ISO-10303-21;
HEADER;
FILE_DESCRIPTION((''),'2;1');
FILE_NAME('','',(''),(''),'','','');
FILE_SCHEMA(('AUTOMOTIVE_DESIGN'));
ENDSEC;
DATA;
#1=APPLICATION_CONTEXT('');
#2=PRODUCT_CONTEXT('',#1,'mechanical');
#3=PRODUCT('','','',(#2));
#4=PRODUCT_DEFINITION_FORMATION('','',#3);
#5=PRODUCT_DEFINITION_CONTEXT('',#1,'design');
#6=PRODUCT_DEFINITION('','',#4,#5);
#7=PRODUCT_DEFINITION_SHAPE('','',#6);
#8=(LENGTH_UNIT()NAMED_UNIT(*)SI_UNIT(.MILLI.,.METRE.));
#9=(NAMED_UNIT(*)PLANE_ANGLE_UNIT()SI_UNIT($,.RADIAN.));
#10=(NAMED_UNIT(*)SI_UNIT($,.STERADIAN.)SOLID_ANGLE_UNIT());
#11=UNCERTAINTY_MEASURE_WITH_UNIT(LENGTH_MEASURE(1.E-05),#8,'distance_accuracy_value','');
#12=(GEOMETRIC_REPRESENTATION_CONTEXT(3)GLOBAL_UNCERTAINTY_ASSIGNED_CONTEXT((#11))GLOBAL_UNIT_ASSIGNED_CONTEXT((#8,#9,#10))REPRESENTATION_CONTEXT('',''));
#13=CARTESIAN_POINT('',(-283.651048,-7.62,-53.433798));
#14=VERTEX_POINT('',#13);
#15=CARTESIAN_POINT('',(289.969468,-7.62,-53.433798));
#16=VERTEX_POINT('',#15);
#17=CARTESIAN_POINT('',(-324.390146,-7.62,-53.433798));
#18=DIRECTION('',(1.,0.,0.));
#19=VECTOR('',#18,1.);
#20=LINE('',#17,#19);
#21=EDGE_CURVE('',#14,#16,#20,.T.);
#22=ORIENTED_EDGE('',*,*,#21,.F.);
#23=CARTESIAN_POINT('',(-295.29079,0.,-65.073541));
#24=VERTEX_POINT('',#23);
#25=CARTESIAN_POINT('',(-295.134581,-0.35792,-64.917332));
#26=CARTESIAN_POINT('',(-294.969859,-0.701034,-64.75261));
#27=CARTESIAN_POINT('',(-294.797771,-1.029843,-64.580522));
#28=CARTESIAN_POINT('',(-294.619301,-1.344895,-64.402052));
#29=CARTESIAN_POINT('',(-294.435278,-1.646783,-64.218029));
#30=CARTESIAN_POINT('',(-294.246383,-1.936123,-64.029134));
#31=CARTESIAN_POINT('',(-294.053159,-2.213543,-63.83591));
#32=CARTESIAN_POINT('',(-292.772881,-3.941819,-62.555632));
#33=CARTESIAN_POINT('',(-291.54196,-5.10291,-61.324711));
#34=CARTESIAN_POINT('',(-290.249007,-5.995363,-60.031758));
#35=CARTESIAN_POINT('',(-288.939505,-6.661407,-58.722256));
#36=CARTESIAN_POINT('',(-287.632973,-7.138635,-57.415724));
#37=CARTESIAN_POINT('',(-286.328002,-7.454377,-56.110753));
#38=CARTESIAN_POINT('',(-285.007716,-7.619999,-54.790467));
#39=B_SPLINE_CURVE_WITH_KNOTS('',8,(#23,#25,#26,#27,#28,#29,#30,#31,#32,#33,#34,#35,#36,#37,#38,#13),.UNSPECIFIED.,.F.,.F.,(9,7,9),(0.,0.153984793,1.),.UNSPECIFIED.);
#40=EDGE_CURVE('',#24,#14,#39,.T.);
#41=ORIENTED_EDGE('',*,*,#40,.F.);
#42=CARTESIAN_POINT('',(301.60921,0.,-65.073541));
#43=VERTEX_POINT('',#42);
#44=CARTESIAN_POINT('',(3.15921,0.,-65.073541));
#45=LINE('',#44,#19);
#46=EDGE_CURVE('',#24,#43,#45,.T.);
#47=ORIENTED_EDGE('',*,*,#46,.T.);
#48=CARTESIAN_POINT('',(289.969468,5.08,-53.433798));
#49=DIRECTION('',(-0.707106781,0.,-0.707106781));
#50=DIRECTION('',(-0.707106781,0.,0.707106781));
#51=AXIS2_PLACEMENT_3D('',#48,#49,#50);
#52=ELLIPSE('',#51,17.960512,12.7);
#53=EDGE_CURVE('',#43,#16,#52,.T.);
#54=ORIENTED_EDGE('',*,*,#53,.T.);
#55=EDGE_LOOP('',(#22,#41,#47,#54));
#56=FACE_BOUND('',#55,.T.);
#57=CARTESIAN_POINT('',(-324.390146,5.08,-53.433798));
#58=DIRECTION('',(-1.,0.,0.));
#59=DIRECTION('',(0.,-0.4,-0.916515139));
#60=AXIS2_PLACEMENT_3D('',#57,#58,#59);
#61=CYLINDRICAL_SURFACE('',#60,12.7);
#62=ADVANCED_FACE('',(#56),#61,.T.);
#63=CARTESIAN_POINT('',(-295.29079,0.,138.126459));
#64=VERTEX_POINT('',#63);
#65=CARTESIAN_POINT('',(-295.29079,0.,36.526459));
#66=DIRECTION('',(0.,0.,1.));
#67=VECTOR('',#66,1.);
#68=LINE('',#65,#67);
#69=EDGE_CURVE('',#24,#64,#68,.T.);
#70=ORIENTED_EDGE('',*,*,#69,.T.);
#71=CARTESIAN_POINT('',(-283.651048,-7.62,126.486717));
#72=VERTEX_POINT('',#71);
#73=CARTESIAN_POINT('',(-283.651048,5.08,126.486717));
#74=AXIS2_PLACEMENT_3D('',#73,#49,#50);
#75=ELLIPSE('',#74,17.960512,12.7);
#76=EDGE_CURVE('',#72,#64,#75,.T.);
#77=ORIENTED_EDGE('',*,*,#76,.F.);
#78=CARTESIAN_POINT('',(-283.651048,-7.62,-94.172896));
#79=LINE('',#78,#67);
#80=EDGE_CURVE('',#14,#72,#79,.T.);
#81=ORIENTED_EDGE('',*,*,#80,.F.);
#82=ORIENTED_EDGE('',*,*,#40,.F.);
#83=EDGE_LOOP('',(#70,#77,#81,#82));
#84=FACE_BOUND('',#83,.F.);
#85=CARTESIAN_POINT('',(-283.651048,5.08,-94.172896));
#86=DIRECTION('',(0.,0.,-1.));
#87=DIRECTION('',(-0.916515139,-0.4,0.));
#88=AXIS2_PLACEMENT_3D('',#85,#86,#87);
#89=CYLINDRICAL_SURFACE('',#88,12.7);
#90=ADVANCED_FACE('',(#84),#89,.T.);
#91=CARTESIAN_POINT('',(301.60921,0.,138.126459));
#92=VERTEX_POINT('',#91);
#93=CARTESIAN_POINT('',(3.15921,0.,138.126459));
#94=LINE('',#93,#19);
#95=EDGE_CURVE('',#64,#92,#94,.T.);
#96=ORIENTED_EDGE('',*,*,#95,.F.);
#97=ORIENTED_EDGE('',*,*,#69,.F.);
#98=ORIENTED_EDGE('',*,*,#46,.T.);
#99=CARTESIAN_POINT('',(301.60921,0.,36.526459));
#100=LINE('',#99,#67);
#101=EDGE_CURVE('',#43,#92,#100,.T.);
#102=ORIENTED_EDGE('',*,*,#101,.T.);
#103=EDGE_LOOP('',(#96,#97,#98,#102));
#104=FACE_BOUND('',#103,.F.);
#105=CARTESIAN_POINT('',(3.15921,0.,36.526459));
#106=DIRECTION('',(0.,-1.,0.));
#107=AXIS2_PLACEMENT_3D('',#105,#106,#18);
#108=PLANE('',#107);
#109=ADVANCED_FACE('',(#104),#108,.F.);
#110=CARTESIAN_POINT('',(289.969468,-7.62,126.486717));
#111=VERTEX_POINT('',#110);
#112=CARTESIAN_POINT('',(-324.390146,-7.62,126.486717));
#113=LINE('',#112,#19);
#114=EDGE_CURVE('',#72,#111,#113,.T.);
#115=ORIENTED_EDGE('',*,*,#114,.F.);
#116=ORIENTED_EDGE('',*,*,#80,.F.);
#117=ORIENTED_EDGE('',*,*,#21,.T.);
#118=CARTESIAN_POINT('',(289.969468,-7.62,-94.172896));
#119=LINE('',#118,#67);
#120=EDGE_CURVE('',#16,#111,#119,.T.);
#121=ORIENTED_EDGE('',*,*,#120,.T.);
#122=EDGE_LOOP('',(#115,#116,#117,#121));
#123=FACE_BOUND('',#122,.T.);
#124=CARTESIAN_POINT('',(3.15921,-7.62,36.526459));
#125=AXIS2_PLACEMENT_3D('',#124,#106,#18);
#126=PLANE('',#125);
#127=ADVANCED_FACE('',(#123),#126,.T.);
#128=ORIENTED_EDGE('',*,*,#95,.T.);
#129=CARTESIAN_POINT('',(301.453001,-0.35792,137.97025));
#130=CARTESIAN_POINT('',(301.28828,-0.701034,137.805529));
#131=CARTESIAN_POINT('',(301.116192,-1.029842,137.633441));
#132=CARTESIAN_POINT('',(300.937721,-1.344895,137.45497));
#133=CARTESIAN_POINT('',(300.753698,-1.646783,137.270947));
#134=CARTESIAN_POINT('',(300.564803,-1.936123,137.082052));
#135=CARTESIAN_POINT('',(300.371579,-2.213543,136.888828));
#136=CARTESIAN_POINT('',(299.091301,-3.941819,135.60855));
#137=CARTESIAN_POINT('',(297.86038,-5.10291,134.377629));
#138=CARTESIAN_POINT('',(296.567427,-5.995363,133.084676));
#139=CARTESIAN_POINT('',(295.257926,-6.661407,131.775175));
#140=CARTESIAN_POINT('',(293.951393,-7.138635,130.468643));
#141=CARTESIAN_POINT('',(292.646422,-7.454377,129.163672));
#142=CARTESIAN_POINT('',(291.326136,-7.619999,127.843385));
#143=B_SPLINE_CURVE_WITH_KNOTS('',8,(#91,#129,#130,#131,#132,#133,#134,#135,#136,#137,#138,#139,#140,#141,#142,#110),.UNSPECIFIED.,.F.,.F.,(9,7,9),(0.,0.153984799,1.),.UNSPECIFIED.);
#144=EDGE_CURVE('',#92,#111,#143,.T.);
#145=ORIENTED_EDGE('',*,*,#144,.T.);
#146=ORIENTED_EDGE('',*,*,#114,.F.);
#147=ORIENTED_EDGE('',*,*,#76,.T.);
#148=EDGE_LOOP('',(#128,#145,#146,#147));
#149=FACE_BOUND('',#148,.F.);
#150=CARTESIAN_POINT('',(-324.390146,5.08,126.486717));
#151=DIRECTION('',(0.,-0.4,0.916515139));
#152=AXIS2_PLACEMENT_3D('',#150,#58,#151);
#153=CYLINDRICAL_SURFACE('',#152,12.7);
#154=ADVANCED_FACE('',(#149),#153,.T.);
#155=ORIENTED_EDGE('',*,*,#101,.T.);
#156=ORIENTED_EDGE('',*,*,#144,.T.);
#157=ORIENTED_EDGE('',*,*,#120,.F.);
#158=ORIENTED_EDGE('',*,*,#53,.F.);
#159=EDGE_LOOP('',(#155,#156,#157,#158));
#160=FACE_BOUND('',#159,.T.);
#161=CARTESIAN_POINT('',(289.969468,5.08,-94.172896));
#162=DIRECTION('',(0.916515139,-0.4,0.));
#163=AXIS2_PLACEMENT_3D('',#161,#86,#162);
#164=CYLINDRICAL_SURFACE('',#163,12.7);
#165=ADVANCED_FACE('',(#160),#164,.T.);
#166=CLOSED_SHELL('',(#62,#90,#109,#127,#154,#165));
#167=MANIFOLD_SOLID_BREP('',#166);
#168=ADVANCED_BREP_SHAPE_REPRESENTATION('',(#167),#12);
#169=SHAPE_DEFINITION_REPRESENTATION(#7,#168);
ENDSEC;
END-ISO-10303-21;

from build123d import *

# Parameters (mm, degrees)
F0_W        = 596.9
F0_H        = 203.2
F1_DEPTH    = 7.62
F2_T1_DEPTH = 655.0987113259
F2_T3_DEPTH = 261.3987113259


# Not quite as in the source:
# - a fillet or chamfer that OpenCascade refuses, or shapes differently, is made with other operations: its cross-section is extruded or revolved along the edge and cut away or added


with BuildPart() as f1:
    # F0 (on Front) → F1 (new body)
    with BuildSketch(Plane.XZ):
        with Locations((3.1592100859, 36.5264592544)):
            Rectangle(F0_W, F0_H)
    extrude(amount=F1_DEPTH)

    # F2: fillet of radius 12.7 on 4 edges, made by hand

    # F2_s2 → F2_t1 (cut)
    with BuildSketch(Plane.YZ.offset(-324.3901455771)):
        with BuildLine():
            ThreePointArc((0, 138.1264592544), (-5.545582337, 133.4427934696), (-7.62, 126.4867169893))
            Line((-7.62, 126.4867169893), (-7.62, 138.1264592544))
            Line((-7.62, 138.1264592544), (0, 138.1264592544))
        make_face()
        with BuildLine():
            ThreePointArc((0, -65.0735407456), (-5.545582337, -60.3898749607), (-7.62, -53.4337984804))
            Line((-7.62, -53.4337984804), (-7.62, -65.0735407456))
            Line((-7.62, -65.0735407456), (0, -65.0735407456))
        make_face()
    extrude(amount=F2_T1_DEPTH, mode=Mode.SUBTRACT)

    # F2_s4 → F2_t3 (cut)
    with BuildSketch(Plane.XY.offset(-94.1728964085)):
        with BuildLine():
            ThreePointArc((-295.2907899141, 0), (-290.6071241293, -5.545582337), (-283.6510476489, -7.62))
            Line((-283.6510476489, -7.62), (-295.2907899141, -7.62))
            Line((-295.2907899141, -7.62), (-295.2907899141, 0))
        make_face()
        with BuildLine():
            ThreePointArc((301.6092100859, 0), (296.925544301, -5.545582337), (289.9694678207, -7.62))
            Line((289.9694678207, -7.62), (301.6092100859, -7.62))
            Line((301.6092100859, -7.62), (301.6092100859, 0))
        make_face()
    extrude(amount=F2_T3_DEPTH, mode=Mode.SUBTRACT)


solid = f1.part
